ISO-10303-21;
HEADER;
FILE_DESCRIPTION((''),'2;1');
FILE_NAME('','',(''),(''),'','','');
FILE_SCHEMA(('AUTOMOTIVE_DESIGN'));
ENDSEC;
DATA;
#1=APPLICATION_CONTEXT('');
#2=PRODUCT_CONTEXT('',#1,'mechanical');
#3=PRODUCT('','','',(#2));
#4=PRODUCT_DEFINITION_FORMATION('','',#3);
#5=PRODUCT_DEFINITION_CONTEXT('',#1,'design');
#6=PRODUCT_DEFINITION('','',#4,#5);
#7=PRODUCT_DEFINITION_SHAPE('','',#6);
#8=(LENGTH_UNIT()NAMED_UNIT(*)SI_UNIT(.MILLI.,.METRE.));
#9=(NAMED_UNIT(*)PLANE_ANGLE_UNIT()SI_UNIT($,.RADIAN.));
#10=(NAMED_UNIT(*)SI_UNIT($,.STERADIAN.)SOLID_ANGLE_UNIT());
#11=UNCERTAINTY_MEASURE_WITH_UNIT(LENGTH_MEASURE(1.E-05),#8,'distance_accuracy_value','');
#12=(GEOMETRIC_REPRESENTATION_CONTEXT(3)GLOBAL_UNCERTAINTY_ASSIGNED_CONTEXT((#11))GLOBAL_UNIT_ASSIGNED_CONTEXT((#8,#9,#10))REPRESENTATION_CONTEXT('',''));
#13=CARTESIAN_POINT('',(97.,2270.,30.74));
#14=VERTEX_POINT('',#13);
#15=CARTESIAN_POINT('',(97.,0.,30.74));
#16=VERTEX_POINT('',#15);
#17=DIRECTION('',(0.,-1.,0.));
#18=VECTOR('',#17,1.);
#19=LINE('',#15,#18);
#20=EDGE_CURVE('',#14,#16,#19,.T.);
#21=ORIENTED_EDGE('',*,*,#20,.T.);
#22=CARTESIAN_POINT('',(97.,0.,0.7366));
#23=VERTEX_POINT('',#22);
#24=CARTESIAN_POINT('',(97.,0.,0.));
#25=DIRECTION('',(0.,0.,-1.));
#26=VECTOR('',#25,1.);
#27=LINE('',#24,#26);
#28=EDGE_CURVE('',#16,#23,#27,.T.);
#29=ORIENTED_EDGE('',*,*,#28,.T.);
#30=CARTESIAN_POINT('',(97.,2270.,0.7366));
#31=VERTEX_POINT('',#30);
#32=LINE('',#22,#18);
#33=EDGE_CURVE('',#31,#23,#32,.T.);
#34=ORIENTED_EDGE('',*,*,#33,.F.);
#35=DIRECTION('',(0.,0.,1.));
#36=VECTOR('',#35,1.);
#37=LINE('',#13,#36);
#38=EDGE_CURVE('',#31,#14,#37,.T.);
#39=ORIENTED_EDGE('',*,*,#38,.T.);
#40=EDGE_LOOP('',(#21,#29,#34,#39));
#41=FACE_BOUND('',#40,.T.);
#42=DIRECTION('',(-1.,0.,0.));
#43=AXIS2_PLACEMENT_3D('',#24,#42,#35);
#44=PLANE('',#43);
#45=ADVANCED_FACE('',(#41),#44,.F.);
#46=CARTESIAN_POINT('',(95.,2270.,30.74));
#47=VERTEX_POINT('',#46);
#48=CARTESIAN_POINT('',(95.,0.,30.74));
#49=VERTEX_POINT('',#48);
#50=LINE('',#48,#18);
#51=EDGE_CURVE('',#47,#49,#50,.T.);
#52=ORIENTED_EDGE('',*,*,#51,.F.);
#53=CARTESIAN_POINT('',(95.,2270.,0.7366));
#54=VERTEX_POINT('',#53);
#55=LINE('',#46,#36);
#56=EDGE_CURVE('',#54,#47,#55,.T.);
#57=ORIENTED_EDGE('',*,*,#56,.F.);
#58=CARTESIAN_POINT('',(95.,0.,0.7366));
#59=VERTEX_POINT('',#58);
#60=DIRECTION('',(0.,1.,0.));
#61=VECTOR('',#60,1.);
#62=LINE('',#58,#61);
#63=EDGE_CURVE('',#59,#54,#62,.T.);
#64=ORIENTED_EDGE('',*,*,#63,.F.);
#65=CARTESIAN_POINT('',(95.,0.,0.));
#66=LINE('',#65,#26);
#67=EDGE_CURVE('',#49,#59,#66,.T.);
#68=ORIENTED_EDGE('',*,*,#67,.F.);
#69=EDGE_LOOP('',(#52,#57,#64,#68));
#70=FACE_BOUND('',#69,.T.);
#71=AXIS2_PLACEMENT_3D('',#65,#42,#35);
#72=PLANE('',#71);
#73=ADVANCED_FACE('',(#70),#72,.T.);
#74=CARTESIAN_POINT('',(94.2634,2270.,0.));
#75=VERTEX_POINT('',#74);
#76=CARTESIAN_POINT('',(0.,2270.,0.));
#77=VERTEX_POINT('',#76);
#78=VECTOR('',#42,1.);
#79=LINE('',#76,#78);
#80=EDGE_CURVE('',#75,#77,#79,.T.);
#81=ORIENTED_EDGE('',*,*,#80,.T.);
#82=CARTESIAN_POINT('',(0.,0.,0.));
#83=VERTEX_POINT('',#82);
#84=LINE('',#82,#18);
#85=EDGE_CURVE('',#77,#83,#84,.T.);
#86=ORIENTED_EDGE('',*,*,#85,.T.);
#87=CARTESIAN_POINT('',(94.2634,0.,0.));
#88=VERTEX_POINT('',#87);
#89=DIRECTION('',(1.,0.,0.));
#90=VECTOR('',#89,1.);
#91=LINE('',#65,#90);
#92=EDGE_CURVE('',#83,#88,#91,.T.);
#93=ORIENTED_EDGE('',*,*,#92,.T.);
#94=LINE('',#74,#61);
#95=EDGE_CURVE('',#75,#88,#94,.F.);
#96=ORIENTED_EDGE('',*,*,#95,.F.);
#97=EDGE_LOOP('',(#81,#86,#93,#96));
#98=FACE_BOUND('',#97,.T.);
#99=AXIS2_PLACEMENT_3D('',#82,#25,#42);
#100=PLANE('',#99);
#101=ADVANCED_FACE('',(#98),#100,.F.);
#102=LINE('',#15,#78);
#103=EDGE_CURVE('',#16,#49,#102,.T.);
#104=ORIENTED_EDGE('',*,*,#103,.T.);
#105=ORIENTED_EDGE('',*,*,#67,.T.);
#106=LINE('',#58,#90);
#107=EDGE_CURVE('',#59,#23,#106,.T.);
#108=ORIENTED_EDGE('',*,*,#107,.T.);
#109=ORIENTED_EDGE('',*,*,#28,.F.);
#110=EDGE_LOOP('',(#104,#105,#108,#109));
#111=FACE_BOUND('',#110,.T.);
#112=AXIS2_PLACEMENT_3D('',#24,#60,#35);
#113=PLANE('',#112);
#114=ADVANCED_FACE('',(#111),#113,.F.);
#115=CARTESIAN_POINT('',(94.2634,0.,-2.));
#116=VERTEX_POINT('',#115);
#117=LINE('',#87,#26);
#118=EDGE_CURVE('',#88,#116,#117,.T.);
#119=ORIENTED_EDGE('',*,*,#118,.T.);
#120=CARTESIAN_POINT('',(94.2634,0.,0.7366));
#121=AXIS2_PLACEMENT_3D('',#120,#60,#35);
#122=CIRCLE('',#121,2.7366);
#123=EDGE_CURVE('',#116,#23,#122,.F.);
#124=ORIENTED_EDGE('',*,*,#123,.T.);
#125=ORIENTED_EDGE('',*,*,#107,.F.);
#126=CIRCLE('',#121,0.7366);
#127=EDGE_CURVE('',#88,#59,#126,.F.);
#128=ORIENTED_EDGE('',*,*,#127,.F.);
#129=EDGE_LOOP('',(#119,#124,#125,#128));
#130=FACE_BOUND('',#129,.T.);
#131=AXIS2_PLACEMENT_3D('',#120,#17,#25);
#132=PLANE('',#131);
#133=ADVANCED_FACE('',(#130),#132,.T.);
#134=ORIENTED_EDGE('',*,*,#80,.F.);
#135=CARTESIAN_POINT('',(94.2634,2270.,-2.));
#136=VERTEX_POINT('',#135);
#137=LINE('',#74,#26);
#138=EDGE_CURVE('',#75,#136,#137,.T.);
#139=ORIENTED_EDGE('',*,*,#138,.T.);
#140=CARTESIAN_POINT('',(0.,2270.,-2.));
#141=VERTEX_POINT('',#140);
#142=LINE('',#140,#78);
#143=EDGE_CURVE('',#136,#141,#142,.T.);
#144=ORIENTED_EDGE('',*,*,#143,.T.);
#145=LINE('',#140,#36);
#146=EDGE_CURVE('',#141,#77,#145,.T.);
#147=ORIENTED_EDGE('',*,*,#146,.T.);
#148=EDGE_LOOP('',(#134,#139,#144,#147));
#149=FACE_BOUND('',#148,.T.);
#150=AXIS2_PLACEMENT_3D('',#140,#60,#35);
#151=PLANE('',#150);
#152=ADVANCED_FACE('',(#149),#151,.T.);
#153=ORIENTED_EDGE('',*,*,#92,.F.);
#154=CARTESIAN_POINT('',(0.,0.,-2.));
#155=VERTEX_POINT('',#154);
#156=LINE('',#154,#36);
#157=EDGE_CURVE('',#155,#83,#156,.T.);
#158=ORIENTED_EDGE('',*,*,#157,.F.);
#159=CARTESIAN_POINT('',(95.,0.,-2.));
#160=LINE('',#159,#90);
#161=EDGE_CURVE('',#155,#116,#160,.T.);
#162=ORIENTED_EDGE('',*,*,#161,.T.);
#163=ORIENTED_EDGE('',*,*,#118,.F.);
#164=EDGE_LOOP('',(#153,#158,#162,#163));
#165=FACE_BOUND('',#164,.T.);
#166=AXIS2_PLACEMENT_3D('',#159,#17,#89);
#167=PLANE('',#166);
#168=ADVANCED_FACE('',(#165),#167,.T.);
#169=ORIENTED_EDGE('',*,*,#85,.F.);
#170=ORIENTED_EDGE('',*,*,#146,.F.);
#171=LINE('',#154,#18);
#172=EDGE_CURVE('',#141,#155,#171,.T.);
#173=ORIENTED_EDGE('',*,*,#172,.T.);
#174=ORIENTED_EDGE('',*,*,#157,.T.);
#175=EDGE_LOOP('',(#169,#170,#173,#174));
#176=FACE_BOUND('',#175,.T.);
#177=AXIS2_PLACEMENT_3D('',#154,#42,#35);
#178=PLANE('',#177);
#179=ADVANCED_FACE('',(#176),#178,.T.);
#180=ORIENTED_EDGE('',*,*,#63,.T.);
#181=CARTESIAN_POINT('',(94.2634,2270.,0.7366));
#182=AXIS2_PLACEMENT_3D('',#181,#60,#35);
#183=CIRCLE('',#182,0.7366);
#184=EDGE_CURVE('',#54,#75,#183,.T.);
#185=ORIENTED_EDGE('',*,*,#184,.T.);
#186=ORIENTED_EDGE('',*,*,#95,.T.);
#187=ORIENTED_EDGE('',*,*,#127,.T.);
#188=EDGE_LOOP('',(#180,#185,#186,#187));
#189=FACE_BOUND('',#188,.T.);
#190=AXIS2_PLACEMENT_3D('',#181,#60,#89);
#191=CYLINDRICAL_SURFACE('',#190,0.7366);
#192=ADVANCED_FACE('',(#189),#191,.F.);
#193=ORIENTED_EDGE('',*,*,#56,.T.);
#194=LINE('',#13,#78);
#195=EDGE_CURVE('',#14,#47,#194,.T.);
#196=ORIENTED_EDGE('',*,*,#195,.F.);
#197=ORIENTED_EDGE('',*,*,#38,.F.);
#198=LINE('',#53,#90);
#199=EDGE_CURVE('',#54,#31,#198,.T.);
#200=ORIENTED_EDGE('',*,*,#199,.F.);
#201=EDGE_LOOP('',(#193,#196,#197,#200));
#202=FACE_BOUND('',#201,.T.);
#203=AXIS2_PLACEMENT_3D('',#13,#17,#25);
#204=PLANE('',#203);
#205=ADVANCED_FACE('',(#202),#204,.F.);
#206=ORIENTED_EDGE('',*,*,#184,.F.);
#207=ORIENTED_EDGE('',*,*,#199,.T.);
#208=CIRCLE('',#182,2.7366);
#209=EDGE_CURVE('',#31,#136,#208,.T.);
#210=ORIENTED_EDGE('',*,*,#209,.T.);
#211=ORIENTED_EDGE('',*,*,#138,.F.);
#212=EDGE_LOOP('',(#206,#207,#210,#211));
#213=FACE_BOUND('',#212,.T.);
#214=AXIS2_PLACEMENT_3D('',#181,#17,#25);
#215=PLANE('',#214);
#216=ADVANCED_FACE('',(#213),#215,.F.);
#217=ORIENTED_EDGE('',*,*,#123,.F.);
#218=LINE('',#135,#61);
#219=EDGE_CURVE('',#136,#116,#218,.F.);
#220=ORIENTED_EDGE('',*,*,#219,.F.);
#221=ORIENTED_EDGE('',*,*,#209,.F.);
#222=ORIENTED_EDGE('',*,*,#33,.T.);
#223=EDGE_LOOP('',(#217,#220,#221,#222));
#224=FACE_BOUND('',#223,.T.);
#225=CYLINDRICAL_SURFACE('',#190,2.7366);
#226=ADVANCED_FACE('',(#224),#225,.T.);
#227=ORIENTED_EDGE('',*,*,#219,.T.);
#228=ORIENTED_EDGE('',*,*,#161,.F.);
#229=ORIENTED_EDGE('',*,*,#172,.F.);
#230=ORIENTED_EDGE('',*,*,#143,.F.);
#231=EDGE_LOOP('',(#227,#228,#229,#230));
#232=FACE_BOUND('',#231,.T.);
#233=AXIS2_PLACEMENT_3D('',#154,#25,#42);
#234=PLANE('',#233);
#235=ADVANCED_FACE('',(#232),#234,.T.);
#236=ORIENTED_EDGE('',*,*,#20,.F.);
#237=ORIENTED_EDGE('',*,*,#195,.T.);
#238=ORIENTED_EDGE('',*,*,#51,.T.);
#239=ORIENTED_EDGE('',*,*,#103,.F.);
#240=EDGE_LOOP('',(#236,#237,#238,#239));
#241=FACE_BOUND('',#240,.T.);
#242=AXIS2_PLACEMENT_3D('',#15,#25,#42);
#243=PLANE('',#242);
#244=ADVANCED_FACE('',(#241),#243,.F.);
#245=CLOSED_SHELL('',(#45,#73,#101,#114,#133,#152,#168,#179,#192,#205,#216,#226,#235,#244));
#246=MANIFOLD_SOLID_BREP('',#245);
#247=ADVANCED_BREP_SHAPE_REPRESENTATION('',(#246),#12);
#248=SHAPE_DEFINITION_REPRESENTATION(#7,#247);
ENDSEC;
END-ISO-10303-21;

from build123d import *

# Parameters (mm, degrees)
SZKIC1_W                           = 95
SZKIC1_H                           = 2270
ODGI_CIE_BAZOWE1_DEPTH             = 2
ODGI_CIE_KRAW_DZI1_STRIP_W         = 9.4732
ODGI_CIE_KRAW_DZI1_STRIP_H         = 2
ODGI_CIE_KRAW_DZI1_STRIP_CUT_DEPTH = 2270
ODGI_CIE_KRAW_DZI1_DEPTH           = 2270


# Sheet-metal steps are written as plain solids
with BuildPart() as part:
    # Szkic1 → Odgięcie bazowe1 (new body)
    with BuildSketch(Plane.XY):
        with Locations((47.5, 1135)):
            Rectangle(SZKIC1_W, SZKIC1_H)
    extrude(amount=-ODGI_CIE_BAZOWE1_DEPTH)

    # Odgięcie krawędzi1 strip (across the edge) → Odgięcie krawędzi1 strip cut (cut)
    with BuildSketch(Plane(origin=(95, 0, 0), x_dir=(-1, 0, 0), z_dir=(0, 1, 0))):
        with Locations((-4, -1)):
            Rectangle(ODGI_CIE_KRAW_DZI1_STRIP_W, ODGI_CIE_KRAW_DZI1_STRIP_H)
    extrude(amount=ODGI_CIE_KRAW_DZI1_STRIP_CUT_DEPTH, mode=Mode.SUBTRACT)

    # Odgięcie krawędzi1 section (across the edge) → Odgięcie krawędzi1 (add)
    with BuildSketch(Plane(origin=(95, 0, 0), x_dir=(-1, 0, 0), z_dir=(0, 1, 0))):
        with BuildLine():
            Line((-2, 0.7366), (-2, 30.74))
            Line((-2, 30.74), (0, 30.74))
            Line((0, 30.74), (0, 0.7366))
            ThreePointArc((0, 0.7366), (0.215745145, 0.215745145), (0.7366, 0))
            Line((0.7366, 0), (0.7366, -2))
            ThreePointArc((0.7366, -2), (-1.198468417, -1.198468417), (-2, 0.7366))
        make_face()
    extrude(amount=ODGI_CIE_KRAW_DZI1_DEPTH)


solid = part.part
